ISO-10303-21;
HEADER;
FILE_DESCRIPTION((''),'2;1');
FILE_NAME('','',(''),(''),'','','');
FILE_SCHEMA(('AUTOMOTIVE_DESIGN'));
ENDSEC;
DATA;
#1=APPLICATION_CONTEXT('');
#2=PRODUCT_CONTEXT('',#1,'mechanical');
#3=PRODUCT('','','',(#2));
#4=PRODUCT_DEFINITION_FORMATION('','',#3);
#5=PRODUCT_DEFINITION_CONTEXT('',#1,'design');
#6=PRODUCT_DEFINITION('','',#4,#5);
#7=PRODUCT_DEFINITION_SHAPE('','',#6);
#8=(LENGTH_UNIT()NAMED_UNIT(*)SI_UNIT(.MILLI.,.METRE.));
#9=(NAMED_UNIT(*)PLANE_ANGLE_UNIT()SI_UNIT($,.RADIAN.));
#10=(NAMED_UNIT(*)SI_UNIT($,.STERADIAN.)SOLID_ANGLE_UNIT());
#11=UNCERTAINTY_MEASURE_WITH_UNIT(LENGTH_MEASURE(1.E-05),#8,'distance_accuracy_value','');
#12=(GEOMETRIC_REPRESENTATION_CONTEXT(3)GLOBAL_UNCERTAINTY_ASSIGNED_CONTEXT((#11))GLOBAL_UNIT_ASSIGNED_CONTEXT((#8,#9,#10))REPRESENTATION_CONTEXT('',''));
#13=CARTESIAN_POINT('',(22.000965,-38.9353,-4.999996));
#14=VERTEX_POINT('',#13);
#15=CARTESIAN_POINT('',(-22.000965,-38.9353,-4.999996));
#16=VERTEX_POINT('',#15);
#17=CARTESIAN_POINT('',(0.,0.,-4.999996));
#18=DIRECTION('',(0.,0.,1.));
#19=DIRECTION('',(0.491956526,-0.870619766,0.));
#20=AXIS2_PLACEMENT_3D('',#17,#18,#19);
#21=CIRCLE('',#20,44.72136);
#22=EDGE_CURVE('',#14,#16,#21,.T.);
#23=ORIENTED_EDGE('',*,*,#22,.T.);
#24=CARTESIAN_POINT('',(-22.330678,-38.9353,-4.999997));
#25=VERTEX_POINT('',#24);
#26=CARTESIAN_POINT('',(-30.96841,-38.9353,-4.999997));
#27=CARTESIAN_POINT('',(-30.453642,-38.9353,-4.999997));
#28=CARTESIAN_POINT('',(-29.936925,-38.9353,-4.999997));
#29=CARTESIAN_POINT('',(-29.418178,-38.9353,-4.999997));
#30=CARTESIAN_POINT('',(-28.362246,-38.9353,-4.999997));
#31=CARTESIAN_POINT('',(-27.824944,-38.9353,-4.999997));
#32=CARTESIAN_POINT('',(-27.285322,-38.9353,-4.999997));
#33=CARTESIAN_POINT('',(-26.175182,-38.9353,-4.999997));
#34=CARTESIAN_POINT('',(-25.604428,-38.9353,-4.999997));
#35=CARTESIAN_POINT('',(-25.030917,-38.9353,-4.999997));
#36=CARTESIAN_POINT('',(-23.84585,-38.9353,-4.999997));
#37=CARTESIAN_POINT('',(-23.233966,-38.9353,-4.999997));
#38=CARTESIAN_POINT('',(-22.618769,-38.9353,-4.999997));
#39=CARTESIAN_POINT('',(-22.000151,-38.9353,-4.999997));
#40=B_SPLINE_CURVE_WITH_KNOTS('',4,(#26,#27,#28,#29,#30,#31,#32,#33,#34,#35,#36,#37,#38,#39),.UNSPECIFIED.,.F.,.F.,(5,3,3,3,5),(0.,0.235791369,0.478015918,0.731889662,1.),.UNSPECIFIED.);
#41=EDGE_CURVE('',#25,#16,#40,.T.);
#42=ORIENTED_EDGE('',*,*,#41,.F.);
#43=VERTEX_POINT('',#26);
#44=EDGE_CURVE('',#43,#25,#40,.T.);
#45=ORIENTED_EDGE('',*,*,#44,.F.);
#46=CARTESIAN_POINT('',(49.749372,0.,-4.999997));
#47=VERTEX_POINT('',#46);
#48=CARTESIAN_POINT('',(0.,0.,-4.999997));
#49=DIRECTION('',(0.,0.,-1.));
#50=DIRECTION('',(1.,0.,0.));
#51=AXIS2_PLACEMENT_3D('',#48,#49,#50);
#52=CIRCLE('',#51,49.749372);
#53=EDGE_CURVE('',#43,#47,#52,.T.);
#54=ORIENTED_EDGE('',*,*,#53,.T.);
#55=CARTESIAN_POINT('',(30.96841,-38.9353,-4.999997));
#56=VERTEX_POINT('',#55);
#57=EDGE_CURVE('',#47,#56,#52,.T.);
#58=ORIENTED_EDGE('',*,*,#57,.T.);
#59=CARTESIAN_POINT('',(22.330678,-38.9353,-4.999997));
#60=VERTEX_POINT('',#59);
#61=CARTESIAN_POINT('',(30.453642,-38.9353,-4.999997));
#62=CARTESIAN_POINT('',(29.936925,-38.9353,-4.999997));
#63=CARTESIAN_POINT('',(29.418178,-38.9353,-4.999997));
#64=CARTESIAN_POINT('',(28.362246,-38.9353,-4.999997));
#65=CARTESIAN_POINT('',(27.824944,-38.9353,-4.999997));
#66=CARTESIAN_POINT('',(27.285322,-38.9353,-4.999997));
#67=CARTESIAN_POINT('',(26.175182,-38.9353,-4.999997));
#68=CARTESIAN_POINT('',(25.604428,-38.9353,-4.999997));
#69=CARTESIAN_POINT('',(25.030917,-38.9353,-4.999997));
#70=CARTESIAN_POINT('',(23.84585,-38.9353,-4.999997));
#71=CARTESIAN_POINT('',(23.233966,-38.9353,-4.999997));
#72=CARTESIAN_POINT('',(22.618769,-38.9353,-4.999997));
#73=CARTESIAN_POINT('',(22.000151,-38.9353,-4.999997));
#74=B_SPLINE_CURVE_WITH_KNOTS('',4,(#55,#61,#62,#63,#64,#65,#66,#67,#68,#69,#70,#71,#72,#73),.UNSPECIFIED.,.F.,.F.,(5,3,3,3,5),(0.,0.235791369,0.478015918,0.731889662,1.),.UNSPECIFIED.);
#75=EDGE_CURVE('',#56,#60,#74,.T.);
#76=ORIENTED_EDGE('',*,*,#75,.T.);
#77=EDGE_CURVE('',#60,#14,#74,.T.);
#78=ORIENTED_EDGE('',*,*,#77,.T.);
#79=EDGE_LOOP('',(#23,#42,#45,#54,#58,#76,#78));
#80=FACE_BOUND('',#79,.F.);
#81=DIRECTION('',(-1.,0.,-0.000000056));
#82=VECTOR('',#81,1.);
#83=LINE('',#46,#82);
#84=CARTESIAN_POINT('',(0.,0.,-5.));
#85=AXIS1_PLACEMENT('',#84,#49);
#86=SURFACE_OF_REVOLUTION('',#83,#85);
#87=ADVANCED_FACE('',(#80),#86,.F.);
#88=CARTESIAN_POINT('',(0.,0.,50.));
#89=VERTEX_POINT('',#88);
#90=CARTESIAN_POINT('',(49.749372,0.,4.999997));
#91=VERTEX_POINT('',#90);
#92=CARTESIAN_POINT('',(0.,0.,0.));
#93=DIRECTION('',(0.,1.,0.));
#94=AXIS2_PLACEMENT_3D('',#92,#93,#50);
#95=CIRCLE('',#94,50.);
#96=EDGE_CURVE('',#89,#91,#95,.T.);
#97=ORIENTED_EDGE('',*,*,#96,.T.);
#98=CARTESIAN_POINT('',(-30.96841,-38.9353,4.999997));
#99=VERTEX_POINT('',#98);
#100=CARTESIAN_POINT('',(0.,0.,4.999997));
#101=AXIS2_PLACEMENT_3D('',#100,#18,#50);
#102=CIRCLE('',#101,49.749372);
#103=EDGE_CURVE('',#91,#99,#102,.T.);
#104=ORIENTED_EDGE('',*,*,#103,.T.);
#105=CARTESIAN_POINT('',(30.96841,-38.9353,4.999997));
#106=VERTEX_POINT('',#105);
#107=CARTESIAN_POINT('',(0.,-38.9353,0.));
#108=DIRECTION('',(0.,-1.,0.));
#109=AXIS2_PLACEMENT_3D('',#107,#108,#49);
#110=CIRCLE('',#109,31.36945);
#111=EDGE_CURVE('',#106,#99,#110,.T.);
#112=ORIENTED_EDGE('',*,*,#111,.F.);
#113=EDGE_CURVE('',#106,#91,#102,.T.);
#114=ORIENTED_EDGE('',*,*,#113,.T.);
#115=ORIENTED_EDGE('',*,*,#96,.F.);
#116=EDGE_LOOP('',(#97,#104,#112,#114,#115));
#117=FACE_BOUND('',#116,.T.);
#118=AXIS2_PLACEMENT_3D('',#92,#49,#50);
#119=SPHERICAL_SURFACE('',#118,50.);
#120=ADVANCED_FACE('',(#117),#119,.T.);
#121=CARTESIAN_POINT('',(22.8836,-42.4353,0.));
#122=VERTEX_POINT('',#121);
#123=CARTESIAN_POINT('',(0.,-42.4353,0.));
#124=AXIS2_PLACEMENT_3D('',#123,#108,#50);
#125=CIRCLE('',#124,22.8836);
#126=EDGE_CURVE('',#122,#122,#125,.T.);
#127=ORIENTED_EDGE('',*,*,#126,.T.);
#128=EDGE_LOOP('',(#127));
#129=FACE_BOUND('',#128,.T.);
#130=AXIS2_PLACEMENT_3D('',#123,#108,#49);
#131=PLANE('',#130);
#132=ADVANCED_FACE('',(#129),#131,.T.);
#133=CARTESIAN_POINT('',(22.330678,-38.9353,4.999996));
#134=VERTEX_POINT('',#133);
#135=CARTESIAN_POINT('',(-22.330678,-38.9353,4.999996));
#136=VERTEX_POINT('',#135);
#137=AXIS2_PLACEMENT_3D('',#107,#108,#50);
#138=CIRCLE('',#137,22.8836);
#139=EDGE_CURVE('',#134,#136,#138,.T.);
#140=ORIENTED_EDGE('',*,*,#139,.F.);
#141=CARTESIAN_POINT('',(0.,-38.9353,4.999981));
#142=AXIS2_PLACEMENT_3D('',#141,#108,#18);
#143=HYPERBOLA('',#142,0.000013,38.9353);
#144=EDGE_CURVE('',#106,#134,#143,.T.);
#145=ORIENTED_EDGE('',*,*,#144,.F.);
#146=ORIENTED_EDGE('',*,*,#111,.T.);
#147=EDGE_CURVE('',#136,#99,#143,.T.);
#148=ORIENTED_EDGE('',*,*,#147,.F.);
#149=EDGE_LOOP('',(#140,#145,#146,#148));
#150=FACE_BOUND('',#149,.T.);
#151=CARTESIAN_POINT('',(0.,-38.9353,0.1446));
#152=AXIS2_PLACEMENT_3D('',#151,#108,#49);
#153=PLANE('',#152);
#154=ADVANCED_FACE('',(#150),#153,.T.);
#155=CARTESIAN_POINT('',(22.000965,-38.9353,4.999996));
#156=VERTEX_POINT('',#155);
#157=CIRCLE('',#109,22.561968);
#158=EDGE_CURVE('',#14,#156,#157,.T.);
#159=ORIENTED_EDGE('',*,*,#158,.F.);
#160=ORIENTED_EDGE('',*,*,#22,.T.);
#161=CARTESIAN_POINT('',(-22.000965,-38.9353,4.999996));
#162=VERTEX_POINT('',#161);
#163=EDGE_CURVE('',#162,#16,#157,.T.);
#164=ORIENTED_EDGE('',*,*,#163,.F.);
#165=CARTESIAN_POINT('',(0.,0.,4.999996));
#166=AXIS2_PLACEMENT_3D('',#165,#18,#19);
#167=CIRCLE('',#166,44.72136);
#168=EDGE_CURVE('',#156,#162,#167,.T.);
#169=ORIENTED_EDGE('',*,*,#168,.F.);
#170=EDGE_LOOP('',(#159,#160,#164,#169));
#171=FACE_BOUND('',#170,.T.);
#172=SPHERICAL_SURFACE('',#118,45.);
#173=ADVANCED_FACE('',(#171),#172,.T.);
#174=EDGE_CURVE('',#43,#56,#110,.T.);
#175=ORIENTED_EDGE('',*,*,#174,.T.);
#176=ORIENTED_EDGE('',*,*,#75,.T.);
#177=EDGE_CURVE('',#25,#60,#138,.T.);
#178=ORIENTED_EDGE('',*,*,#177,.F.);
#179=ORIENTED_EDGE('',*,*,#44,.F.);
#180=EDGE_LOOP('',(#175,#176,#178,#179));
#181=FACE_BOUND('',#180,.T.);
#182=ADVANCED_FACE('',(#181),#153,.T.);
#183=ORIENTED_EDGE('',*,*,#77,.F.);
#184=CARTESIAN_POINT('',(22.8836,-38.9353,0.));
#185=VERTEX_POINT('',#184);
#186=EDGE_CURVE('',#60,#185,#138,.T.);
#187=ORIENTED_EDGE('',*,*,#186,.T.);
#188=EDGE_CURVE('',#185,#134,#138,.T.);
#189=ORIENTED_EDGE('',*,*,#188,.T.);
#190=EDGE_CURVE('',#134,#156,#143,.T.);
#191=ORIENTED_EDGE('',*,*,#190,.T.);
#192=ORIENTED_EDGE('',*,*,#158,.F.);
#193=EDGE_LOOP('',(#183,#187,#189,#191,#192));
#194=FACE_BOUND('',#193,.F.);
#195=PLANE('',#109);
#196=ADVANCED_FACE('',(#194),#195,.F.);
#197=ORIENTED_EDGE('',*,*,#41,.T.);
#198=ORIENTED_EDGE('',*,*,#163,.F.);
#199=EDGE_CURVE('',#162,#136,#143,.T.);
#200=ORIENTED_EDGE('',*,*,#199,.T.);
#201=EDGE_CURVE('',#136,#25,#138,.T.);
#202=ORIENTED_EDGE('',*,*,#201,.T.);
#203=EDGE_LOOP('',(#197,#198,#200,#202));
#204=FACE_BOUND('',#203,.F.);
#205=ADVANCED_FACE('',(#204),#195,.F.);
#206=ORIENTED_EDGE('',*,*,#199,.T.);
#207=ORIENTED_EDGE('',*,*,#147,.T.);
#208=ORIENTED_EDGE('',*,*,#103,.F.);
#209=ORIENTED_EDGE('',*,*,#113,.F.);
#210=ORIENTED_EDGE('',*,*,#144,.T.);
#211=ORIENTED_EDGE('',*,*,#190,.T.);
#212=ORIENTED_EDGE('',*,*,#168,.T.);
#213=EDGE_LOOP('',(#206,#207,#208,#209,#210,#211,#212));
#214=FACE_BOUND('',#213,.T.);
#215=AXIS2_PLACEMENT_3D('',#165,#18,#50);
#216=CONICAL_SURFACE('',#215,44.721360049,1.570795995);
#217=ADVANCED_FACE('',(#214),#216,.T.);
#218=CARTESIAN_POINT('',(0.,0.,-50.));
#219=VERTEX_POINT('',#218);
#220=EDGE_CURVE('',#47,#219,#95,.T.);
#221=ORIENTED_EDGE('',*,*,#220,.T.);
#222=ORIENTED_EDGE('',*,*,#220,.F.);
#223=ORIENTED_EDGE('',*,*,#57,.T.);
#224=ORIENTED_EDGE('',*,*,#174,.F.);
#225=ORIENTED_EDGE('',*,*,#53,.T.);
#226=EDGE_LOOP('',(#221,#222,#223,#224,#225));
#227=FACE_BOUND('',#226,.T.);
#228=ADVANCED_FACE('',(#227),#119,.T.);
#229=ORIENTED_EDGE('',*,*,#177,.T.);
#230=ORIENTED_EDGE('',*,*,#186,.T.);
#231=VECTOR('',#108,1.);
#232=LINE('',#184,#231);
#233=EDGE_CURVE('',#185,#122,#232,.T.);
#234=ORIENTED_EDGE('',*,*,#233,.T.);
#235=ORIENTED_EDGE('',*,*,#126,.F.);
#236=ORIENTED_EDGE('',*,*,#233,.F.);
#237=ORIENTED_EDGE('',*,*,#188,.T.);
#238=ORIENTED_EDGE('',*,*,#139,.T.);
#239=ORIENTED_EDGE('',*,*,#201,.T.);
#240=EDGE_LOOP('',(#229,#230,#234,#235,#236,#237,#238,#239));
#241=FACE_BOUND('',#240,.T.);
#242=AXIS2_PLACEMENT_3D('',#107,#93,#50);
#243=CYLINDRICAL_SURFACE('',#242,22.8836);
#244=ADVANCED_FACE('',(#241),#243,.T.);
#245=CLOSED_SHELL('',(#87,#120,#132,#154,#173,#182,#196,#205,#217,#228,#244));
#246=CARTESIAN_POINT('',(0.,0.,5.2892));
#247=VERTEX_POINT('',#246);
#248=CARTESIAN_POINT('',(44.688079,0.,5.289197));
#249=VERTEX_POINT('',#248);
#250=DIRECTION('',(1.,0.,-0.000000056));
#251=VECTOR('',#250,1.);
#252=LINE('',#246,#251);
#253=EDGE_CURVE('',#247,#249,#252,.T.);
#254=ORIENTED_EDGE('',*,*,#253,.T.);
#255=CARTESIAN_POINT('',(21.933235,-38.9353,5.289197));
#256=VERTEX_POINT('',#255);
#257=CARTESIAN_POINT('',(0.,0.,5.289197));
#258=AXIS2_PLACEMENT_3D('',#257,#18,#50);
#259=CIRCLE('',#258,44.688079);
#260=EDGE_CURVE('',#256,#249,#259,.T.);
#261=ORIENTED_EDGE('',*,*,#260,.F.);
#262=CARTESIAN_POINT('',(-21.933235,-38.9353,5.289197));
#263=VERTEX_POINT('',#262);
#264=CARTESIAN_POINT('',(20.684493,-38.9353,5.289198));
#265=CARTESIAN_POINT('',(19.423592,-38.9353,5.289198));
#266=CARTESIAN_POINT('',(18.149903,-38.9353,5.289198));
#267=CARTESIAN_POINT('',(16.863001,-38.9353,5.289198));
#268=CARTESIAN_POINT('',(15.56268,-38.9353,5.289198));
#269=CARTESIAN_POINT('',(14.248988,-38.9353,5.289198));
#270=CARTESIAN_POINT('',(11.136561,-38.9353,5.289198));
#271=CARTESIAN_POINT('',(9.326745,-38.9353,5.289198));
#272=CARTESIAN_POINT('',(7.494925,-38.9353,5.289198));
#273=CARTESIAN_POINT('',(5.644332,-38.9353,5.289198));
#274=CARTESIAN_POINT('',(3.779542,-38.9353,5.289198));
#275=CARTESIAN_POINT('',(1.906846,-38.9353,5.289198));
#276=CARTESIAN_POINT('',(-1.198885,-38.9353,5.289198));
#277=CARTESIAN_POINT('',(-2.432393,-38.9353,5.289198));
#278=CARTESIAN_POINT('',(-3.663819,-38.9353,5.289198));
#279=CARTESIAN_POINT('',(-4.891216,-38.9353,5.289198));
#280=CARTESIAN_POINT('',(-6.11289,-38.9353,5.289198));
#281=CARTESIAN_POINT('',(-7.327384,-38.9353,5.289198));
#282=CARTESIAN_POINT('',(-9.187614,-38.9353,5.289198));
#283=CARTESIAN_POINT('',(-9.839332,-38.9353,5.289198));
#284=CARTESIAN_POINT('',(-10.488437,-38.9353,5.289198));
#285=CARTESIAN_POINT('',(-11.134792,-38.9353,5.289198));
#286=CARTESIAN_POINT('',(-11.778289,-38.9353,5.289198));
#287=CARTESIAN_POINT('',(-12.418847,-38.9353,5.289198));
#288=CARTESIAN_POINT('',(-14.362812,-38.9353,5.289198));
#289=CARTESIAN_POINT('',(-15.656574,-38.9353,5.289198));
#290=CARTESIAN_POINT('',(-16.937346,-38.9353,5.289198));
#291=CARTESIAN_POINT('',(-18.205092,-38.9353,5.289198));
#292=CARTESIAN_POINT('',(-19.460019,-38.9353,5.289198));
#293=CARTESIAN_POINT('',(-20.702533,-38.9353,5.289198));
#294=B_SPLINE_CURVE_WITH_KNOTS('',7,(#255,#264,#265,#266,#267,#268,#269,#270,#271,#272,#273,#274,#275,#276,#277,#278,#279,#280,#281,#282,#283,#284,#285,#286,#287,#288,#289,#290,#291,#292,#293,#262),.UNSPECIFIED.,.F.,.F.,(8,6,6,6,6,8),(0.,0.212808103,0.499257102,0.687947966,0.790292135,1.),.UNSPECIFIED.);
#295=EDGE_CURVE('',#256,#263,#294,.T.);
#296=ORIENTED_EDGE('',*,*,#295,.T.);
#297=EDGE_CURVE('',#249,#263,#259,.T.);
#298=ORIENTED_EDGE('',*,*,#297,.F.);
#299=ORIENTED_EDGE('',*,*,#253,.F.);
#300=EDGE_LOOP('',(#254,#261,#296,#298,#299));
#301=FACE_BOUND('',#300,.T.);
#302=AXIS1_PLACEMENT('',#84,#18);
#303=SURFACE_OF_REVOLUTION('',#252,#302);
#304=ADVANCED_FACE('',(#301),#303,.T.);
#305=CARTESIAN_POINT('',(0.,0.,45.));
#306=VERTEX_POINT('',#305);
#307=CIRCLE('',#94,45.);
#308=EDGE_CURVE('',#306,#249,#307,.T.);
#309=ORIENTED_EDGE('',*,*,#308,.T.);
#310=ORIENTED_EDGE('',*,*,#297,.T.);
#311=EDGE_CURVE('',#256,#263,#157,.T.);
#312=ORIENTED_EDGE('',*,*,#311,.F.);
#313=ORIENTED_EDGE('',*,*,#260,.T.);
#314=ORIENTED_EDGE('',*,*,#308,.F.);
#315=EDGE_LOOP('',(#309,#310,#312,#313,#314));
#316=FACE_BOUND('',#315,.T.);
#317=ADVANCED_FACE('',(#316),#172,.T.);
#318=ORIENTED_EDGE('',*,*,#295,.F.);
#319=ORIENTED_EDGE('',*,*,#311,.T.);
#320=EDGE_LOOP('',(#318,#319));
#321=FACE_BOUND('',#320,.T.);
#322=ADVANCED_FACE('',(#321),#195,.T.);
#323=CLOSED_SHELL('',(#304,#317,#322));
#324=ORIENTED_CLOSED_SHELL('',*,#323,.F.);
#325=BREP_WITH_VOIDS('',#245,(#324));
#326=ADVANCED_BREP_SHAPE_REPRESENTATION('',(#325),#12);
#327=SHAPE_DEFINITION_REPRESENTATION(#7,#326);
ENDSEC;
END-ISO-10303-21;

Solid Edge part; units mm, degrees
sketch "Sketch1" plane through (0, 0, 0) normal (0, -1, 0) x (1, 0, 0)
  line L0 (44.7214, 5) -> (49.7494, 5)
  line L1 (0, 45) -> (0, 50)
  arc A0 (0, 50) -> (49.7494, 5) centre (0, 0) cw
  arc A1 (0, 45) -> (44.7214, 5) centre (0, 0) cw
revolve "RevolvedProtrusion1" add sketch "Sketch1" angle 360 about axis through (0, 0, 45) along (0, 0, 1)
sketch "Sketch2" plane through (0, 0, 0) normal (0, -1, 0) x (1, 0, 0)
  line L0 (0, 5.2892) -> (44.6881, 5.2892)
  arc A0 (44.6881, 5.2892) -> (44.7214, -5) centre (0, 0) cw
  line L1 (0, -5) -> (44.7214, -5)
  line L2 (0, -5) -> (0, 5.2892)
revolve "RevolvedProtrusion2" add sketch "Sketch2" angle 360 about axis through (0, 0, -5) along (0, 0, 1)
sketch "Sketch3" plane through (0, 0, 0) normal (0, -1, 0) x (1, 0, 0)
  line L0 (0, -5) -> (0, -50)
  line L1 (49.7494, -5) -> (0, -5)
  arc A0 (49.7494, -5) -> (0, -50) centre (0, 0) cw
revolve "RevolvedProtrusion3" add sketch "Sketch3" angle 360 about axis through (0, 0, -5) along (0, 0, -1)
extrude "Cutout1" [suppressed]
sketch "Sketch4" plane through (0, -38.9353, 0) normal (0, -1, 0) x (1, 0, 0)
  circle A0 centre (0, 0.1446) radius 45.8242
extrude "Cutout2" cut sketch "Sketch4" along normal blind 20
sketch "Sketch5" plane through (0, -38.9353, 0) normal (0, -1, 0) x (1, 0, 0)
  circle A0 centre (0, 0) radius 22.8836
extrude "ExtrudedProtrusion_1" add sketch "Sketch5" along normal blind 3.5
